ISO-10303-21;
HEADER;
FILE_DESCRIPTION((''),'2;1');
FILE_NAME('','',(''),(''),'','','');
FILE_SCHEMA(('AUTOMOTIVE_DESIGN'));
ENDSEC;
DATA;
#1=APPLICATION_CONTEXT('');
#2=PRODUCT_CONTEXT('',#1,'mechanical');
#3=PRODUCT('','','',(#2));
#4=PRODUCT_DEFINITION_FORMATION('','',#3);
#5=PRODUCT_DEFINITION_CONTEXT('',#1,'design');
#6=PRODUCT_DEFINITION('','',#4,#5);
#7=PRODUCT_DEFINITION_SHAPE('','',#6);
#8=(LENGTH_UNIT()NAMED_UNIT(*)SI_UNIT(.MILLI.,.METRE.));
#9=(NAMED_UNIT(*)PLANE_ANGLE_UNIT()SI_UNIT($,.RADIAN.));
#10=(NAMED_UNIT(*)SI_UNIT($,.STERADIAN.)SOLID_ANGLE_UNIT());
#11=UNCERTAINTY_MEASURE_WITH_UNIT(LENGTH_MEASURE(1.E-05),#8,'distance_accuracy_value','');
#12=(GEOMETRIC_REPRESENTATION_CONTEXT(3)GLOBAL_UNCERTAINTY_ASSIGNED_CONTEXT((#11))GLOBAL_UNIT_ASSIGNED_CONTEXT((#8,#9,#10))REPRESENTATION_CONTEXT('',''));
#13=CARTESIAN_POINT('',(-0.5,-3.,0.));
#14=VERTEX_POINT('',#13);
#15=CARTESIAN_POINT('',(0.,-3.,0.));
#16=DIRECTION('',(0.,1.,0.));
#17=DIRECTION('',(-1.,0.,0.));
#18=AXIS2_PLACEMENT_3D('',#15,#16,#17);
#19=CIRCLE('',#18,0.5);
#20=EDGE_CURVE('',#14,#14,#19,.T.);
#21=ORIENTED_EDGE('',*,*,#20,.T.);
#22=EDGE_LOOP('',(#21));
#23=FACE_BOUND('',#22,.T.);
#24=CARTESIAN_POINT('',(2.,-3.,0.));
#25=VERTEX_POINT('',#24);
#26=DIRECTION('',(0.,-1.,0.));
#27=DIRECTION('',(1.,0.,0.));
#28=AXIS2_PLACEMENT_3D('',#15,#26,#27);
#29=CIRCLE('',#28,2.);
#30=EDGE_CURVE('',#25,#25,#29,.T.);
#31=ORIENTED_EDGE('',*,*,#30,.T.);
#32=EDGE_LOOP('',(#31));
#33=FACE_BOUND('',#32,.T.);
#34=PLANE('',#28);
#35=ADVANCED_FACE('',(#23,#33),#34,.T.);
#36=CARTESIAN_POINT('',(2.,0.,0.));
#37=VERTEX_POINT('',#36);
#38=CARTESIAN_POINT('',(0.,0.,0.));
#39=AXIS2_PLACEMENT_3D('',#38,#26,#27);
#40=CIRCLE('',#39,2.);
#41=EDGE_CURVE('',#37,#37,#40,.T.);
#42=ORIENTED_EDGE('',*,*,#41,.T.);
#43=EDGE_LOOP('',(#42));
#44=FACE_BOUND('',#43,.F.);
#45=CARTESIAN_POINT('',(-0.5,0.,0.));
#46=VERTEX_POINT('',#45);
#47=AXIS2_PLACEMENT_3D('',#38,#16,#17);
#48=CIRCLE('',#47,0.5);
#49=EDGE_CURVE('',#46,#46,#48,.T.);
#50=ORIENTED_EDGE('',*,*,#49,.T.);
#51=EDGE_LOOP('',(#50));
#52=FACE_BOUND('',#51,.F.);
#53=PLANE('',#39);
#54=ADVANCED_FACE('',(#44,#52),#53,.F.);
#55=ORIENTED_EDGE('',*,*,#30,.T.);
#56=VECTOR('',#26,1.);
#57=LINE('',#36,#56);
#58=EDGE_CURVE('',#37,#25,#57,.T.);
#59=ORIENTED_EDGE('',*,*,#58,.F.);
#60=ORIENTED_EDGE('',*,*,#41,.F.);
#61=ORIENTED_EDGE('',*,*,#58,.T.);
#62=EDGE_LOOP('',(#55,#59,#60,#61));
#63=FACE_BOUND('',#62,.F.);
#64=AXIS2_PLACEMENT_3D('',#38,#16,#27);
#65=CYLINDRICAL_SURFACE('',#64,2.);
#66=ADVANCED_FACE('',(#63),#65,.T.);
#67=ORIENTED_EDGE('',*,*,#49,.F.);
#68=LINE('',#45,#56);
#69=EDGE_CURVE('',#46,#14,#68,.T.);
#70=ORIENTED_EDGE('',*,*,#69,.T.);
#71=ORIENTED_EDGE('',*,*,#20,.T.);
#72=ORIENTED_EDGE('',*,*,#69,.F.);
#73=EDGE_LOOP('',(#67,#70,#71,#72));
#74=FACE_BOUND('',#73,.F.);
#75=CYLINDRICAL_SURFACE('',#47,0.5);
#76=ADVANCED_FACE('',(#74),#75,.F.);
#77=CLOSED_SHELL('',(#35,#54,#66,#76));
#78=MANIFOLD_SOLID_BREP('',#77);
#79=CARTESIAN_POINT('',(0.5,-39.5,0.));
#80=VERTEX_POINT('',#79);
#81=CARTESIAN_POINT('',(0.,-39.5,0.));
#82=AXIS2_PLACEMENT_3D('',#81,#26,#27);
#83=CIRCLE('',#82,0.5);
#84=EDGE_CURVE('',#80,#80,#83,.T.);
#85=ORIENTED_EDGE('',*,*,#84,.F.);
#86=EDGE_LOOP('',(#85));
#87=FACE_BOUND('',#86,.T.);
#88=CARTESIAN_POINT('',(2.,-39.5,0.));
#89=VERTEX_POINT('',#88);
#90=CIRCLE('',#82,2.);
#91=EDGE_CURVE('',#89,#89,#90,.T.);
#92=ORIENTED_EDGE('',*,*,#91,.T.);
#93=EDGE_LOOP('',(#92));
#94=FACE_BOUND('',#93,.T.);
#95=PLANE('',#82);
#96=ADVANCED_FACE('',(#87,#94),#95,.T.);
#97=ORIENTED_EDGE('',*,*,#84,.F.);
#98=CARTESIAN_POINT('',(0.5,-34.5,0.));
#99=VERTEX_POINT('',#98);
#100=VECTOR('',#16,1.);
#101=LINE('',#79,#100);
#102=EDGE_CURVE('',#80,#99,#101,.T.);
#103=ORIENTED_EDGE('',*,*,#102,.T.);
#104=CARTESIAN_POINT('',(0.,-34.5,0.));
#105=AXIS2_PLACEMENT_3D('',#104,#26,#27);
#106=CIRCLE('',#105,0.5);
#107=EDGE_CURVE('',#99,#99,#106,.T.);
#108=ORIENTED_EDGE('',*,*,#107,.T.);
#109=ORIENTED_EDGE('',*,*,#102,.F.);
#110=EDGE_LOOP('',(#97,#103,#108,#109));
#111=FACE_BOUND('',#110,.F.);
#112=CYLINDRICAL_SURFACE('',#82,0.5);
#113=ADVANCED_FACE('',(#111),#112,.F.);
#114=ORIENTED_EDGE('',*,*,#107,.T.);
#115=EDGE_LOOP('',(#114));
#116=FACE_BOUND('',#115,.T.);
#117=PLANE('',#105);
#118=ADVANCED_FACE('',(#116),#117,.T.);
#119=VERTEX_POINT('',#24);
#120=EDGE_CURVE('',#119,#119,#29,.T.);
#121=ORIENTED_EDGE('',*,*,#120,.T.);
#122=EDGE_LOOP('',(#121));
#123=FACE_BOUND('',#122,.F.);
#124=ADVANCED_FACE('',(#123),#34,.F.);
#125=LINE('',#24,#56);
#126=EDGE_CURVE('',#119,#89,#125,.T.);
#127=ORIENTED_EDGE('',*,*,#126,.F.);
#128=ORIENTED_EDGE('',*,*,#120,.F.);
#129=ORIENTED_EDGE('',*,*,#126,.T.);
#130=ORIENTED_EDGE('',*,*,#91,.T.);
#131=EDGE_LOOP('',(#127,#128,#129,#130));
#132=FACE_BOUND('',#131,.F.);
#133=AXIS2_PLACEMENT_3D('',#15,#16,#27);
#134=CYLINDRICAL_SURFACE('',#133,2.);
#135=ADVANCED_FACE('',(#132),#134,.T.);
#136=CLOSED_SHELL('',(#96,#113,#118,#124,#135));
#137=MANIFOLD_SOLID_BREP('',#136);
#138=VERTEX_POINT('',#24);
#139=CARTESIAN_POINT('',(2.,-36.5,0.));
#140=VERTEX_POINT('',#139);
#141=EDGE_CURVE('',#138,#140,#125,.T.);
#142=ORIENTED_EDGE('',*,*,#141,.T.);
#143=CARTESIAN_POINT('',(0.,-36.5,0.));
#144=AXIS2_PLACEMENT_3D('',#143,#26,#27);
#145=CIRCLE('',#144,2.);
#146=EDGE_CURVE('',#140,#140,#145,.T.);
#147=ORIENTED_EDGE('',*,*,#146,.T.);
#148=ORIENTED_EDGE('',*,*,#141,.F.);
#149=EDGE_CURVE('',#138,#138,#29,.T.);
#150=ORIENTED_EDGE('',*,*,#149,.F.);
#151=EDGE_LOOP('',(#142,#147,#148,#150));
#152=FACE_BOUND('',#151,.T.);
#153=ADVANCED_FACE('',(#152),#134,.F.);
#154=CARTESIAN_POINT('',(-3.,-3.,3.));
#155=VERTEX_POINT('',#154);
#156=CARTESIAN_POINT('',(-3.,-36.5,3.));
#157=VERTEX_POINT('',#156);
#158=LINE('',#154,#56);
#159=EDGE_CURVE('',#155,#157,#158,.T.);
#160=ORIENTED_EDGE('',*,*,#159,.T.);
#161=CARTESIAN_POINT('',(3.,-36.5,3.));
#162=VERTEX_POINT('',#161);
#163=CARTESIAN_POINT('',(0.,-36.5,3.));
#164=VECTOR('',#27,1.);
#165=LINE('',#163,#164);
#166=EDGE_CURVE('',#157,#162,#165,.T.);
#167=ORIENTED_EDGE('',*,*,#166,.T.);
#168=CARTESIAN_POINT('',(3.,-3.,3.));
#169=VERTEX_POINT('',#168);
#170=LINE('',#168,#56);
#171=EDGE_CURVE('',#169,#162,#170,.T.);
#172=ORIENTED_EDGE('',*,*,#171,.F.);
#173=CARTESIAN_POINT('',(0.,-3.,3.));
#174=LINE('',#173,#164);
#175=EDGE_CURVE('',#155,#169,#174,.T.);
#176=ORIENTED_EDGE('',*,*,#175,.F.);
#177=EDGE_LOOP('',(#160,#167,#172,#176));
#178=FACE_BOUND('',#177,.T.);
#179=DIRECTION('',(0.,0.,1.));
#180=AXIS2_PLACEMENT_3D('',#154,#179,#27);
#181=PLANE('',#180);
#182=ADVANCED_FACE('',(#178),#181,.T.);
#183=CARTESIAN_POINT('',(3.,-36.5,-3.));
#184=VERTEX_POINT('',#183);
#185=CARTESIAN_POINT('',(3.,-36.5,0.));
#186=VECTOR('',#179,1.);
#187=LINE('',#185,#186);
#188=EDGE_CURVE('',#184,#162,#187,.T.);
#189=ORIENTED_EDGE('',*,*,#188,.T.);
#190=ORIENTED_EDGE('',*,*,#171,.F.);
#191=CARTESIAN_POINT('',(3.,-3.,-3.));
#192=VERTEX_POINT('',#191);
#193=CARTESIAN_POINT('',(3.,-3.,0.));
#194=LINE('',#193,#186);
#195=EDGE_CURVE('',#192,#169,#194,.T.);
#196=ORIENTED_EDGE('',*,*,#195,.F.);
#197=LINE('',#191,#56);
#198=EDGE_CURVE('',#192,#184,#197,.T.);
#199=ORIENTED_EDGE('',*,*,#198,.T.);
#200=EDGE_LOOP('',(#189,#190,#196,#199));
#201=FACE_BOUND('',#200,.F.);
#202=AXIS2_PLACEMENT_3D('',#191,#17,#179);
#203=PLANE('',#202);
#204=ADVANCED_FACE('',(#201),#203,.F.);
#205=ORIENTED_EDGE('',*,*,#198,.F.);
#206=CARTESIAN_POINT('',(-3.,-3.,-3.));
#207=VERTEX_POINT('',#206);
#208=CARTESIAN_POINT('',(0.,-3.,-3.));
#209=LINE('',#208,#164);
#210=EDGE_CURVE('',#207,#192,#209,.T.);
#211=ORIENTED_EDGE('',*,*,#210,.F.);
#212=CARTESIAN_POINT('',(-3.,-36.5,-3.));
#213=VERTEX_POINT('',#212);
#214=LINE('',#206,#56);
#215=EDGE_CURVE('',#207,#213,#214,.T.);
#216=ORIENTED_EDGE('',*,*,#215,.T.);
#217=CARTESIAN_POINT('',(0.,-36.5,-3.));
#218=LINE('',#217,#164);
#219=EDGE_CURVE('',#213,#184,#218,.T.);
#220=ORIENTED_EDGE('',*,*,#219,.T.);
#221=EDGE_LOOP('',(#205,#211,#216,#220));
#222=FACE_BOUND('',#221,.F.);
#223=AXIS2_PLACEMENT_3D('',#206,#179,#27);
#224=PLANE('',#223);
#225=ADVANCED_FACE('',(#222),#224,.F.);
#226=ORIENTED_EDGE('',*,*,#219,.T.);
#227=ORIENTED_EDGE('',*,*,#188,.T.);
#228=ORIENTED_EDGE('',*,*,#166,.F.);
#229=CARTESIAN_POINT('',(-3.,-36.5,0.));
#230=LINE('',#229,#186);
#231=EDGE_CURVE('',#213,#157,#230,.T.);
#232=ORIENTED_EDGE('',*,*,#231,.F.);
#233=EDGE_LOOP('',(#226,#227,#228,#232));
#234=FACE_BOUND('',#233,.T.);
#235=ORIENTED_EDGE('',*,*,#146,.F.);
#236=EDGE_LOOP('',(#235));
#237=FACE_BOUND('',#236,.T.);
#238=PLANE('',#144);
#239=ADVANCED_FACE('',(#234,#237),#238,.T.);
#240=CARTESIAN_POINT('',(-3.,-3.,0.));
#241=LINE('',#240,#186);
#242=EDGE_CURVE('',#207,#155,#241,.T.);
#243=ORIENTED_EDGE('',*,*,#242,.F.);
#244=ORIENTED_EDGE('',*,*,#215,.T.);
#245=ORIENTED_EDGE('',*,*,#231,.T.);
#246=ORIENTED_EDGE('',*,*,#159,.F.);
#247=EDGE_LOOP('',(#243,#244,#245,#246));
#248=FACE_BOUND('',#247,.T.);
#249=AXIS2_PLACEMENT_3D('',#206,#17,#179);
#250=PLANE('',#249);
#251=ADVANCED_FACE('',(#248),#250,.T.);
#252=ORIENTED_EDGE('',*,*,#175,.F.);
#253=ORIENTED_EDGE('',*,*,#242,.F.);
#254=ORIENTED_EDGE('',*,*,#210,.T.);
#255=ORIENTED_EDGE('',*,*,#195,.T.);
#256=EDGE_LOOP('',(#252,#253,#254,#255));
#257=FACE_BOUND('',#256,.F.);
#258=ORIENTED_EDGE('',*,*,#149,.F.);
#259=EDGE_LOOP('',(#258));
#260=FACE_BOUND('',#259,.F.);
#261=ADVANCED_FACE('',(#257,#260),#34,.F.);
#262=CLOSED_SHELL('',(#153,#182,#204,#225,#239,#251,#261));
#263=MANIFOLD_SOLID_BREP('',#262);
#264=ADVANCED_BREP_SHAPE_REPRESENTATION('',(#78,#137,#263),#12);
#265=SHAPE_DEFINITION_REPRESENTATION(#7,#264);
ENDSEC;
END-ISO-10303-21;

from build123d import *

# Parameters (mm, degrees)
F0_R     = 2
F1_DEPTH = 3
F2_W     = 6
F2_H     = 6
F2_R     = 2
F3_DEPTH = 33.5
F4_DEPTH = 36.5
F5_R     = 0.5
F6_DEPTH = 5
F7_R     = 0.5
F8_DEPTH = 5


with BuildPart() as f1:
    # F0 (on Front) → F1 (new body)
    with BuildSketch(Plane.XZ):
        Circle(F0_R)
    extrude(amount=F1_DEPTH)


with BuildPart() as f3:
    # F2 (on face) → F3 (new body)
    with BuildSketch(Plane.XZ.offset(3)):
        Rectangle(F2_W, F2_H)
        Circle(F2_R, mode=Mode.SUBTRACT)
    extrude(amount=F3_DEPTH)


with BuildPart() as f4:
    # F4 (new): a face of the model
    f4_faces = [f1.part.faces().sort_by_distance(p)[0] for p in [
        (0, -3, 0),
    ]]
    extrude(f4_faces, amount=F4_DEPTH)

    # F5 (on face) → F6 (cut)
    with BuildSketch(Plane.XZ.offset(39.5)):
        Circle(F5_R)
    extrude(amount=-F6_DEPTH, mode=Mode.SUBTRACT)


with BuildPart() as f1_1:
    add(f1.part)

    # F7 (on face) → F8 (cut)
    with BuildSketch(Plane(origin=(0, 0, 0), x_dir=(-1, 0, 0), z_dir=(0, 1, 0))):
        Circle(F7_R)
    extrude(amount=-F8_DEPTH, mode=Mode.SUBTRACT)


solid = Compound([f3.part, f4.part, f1_1.part])
